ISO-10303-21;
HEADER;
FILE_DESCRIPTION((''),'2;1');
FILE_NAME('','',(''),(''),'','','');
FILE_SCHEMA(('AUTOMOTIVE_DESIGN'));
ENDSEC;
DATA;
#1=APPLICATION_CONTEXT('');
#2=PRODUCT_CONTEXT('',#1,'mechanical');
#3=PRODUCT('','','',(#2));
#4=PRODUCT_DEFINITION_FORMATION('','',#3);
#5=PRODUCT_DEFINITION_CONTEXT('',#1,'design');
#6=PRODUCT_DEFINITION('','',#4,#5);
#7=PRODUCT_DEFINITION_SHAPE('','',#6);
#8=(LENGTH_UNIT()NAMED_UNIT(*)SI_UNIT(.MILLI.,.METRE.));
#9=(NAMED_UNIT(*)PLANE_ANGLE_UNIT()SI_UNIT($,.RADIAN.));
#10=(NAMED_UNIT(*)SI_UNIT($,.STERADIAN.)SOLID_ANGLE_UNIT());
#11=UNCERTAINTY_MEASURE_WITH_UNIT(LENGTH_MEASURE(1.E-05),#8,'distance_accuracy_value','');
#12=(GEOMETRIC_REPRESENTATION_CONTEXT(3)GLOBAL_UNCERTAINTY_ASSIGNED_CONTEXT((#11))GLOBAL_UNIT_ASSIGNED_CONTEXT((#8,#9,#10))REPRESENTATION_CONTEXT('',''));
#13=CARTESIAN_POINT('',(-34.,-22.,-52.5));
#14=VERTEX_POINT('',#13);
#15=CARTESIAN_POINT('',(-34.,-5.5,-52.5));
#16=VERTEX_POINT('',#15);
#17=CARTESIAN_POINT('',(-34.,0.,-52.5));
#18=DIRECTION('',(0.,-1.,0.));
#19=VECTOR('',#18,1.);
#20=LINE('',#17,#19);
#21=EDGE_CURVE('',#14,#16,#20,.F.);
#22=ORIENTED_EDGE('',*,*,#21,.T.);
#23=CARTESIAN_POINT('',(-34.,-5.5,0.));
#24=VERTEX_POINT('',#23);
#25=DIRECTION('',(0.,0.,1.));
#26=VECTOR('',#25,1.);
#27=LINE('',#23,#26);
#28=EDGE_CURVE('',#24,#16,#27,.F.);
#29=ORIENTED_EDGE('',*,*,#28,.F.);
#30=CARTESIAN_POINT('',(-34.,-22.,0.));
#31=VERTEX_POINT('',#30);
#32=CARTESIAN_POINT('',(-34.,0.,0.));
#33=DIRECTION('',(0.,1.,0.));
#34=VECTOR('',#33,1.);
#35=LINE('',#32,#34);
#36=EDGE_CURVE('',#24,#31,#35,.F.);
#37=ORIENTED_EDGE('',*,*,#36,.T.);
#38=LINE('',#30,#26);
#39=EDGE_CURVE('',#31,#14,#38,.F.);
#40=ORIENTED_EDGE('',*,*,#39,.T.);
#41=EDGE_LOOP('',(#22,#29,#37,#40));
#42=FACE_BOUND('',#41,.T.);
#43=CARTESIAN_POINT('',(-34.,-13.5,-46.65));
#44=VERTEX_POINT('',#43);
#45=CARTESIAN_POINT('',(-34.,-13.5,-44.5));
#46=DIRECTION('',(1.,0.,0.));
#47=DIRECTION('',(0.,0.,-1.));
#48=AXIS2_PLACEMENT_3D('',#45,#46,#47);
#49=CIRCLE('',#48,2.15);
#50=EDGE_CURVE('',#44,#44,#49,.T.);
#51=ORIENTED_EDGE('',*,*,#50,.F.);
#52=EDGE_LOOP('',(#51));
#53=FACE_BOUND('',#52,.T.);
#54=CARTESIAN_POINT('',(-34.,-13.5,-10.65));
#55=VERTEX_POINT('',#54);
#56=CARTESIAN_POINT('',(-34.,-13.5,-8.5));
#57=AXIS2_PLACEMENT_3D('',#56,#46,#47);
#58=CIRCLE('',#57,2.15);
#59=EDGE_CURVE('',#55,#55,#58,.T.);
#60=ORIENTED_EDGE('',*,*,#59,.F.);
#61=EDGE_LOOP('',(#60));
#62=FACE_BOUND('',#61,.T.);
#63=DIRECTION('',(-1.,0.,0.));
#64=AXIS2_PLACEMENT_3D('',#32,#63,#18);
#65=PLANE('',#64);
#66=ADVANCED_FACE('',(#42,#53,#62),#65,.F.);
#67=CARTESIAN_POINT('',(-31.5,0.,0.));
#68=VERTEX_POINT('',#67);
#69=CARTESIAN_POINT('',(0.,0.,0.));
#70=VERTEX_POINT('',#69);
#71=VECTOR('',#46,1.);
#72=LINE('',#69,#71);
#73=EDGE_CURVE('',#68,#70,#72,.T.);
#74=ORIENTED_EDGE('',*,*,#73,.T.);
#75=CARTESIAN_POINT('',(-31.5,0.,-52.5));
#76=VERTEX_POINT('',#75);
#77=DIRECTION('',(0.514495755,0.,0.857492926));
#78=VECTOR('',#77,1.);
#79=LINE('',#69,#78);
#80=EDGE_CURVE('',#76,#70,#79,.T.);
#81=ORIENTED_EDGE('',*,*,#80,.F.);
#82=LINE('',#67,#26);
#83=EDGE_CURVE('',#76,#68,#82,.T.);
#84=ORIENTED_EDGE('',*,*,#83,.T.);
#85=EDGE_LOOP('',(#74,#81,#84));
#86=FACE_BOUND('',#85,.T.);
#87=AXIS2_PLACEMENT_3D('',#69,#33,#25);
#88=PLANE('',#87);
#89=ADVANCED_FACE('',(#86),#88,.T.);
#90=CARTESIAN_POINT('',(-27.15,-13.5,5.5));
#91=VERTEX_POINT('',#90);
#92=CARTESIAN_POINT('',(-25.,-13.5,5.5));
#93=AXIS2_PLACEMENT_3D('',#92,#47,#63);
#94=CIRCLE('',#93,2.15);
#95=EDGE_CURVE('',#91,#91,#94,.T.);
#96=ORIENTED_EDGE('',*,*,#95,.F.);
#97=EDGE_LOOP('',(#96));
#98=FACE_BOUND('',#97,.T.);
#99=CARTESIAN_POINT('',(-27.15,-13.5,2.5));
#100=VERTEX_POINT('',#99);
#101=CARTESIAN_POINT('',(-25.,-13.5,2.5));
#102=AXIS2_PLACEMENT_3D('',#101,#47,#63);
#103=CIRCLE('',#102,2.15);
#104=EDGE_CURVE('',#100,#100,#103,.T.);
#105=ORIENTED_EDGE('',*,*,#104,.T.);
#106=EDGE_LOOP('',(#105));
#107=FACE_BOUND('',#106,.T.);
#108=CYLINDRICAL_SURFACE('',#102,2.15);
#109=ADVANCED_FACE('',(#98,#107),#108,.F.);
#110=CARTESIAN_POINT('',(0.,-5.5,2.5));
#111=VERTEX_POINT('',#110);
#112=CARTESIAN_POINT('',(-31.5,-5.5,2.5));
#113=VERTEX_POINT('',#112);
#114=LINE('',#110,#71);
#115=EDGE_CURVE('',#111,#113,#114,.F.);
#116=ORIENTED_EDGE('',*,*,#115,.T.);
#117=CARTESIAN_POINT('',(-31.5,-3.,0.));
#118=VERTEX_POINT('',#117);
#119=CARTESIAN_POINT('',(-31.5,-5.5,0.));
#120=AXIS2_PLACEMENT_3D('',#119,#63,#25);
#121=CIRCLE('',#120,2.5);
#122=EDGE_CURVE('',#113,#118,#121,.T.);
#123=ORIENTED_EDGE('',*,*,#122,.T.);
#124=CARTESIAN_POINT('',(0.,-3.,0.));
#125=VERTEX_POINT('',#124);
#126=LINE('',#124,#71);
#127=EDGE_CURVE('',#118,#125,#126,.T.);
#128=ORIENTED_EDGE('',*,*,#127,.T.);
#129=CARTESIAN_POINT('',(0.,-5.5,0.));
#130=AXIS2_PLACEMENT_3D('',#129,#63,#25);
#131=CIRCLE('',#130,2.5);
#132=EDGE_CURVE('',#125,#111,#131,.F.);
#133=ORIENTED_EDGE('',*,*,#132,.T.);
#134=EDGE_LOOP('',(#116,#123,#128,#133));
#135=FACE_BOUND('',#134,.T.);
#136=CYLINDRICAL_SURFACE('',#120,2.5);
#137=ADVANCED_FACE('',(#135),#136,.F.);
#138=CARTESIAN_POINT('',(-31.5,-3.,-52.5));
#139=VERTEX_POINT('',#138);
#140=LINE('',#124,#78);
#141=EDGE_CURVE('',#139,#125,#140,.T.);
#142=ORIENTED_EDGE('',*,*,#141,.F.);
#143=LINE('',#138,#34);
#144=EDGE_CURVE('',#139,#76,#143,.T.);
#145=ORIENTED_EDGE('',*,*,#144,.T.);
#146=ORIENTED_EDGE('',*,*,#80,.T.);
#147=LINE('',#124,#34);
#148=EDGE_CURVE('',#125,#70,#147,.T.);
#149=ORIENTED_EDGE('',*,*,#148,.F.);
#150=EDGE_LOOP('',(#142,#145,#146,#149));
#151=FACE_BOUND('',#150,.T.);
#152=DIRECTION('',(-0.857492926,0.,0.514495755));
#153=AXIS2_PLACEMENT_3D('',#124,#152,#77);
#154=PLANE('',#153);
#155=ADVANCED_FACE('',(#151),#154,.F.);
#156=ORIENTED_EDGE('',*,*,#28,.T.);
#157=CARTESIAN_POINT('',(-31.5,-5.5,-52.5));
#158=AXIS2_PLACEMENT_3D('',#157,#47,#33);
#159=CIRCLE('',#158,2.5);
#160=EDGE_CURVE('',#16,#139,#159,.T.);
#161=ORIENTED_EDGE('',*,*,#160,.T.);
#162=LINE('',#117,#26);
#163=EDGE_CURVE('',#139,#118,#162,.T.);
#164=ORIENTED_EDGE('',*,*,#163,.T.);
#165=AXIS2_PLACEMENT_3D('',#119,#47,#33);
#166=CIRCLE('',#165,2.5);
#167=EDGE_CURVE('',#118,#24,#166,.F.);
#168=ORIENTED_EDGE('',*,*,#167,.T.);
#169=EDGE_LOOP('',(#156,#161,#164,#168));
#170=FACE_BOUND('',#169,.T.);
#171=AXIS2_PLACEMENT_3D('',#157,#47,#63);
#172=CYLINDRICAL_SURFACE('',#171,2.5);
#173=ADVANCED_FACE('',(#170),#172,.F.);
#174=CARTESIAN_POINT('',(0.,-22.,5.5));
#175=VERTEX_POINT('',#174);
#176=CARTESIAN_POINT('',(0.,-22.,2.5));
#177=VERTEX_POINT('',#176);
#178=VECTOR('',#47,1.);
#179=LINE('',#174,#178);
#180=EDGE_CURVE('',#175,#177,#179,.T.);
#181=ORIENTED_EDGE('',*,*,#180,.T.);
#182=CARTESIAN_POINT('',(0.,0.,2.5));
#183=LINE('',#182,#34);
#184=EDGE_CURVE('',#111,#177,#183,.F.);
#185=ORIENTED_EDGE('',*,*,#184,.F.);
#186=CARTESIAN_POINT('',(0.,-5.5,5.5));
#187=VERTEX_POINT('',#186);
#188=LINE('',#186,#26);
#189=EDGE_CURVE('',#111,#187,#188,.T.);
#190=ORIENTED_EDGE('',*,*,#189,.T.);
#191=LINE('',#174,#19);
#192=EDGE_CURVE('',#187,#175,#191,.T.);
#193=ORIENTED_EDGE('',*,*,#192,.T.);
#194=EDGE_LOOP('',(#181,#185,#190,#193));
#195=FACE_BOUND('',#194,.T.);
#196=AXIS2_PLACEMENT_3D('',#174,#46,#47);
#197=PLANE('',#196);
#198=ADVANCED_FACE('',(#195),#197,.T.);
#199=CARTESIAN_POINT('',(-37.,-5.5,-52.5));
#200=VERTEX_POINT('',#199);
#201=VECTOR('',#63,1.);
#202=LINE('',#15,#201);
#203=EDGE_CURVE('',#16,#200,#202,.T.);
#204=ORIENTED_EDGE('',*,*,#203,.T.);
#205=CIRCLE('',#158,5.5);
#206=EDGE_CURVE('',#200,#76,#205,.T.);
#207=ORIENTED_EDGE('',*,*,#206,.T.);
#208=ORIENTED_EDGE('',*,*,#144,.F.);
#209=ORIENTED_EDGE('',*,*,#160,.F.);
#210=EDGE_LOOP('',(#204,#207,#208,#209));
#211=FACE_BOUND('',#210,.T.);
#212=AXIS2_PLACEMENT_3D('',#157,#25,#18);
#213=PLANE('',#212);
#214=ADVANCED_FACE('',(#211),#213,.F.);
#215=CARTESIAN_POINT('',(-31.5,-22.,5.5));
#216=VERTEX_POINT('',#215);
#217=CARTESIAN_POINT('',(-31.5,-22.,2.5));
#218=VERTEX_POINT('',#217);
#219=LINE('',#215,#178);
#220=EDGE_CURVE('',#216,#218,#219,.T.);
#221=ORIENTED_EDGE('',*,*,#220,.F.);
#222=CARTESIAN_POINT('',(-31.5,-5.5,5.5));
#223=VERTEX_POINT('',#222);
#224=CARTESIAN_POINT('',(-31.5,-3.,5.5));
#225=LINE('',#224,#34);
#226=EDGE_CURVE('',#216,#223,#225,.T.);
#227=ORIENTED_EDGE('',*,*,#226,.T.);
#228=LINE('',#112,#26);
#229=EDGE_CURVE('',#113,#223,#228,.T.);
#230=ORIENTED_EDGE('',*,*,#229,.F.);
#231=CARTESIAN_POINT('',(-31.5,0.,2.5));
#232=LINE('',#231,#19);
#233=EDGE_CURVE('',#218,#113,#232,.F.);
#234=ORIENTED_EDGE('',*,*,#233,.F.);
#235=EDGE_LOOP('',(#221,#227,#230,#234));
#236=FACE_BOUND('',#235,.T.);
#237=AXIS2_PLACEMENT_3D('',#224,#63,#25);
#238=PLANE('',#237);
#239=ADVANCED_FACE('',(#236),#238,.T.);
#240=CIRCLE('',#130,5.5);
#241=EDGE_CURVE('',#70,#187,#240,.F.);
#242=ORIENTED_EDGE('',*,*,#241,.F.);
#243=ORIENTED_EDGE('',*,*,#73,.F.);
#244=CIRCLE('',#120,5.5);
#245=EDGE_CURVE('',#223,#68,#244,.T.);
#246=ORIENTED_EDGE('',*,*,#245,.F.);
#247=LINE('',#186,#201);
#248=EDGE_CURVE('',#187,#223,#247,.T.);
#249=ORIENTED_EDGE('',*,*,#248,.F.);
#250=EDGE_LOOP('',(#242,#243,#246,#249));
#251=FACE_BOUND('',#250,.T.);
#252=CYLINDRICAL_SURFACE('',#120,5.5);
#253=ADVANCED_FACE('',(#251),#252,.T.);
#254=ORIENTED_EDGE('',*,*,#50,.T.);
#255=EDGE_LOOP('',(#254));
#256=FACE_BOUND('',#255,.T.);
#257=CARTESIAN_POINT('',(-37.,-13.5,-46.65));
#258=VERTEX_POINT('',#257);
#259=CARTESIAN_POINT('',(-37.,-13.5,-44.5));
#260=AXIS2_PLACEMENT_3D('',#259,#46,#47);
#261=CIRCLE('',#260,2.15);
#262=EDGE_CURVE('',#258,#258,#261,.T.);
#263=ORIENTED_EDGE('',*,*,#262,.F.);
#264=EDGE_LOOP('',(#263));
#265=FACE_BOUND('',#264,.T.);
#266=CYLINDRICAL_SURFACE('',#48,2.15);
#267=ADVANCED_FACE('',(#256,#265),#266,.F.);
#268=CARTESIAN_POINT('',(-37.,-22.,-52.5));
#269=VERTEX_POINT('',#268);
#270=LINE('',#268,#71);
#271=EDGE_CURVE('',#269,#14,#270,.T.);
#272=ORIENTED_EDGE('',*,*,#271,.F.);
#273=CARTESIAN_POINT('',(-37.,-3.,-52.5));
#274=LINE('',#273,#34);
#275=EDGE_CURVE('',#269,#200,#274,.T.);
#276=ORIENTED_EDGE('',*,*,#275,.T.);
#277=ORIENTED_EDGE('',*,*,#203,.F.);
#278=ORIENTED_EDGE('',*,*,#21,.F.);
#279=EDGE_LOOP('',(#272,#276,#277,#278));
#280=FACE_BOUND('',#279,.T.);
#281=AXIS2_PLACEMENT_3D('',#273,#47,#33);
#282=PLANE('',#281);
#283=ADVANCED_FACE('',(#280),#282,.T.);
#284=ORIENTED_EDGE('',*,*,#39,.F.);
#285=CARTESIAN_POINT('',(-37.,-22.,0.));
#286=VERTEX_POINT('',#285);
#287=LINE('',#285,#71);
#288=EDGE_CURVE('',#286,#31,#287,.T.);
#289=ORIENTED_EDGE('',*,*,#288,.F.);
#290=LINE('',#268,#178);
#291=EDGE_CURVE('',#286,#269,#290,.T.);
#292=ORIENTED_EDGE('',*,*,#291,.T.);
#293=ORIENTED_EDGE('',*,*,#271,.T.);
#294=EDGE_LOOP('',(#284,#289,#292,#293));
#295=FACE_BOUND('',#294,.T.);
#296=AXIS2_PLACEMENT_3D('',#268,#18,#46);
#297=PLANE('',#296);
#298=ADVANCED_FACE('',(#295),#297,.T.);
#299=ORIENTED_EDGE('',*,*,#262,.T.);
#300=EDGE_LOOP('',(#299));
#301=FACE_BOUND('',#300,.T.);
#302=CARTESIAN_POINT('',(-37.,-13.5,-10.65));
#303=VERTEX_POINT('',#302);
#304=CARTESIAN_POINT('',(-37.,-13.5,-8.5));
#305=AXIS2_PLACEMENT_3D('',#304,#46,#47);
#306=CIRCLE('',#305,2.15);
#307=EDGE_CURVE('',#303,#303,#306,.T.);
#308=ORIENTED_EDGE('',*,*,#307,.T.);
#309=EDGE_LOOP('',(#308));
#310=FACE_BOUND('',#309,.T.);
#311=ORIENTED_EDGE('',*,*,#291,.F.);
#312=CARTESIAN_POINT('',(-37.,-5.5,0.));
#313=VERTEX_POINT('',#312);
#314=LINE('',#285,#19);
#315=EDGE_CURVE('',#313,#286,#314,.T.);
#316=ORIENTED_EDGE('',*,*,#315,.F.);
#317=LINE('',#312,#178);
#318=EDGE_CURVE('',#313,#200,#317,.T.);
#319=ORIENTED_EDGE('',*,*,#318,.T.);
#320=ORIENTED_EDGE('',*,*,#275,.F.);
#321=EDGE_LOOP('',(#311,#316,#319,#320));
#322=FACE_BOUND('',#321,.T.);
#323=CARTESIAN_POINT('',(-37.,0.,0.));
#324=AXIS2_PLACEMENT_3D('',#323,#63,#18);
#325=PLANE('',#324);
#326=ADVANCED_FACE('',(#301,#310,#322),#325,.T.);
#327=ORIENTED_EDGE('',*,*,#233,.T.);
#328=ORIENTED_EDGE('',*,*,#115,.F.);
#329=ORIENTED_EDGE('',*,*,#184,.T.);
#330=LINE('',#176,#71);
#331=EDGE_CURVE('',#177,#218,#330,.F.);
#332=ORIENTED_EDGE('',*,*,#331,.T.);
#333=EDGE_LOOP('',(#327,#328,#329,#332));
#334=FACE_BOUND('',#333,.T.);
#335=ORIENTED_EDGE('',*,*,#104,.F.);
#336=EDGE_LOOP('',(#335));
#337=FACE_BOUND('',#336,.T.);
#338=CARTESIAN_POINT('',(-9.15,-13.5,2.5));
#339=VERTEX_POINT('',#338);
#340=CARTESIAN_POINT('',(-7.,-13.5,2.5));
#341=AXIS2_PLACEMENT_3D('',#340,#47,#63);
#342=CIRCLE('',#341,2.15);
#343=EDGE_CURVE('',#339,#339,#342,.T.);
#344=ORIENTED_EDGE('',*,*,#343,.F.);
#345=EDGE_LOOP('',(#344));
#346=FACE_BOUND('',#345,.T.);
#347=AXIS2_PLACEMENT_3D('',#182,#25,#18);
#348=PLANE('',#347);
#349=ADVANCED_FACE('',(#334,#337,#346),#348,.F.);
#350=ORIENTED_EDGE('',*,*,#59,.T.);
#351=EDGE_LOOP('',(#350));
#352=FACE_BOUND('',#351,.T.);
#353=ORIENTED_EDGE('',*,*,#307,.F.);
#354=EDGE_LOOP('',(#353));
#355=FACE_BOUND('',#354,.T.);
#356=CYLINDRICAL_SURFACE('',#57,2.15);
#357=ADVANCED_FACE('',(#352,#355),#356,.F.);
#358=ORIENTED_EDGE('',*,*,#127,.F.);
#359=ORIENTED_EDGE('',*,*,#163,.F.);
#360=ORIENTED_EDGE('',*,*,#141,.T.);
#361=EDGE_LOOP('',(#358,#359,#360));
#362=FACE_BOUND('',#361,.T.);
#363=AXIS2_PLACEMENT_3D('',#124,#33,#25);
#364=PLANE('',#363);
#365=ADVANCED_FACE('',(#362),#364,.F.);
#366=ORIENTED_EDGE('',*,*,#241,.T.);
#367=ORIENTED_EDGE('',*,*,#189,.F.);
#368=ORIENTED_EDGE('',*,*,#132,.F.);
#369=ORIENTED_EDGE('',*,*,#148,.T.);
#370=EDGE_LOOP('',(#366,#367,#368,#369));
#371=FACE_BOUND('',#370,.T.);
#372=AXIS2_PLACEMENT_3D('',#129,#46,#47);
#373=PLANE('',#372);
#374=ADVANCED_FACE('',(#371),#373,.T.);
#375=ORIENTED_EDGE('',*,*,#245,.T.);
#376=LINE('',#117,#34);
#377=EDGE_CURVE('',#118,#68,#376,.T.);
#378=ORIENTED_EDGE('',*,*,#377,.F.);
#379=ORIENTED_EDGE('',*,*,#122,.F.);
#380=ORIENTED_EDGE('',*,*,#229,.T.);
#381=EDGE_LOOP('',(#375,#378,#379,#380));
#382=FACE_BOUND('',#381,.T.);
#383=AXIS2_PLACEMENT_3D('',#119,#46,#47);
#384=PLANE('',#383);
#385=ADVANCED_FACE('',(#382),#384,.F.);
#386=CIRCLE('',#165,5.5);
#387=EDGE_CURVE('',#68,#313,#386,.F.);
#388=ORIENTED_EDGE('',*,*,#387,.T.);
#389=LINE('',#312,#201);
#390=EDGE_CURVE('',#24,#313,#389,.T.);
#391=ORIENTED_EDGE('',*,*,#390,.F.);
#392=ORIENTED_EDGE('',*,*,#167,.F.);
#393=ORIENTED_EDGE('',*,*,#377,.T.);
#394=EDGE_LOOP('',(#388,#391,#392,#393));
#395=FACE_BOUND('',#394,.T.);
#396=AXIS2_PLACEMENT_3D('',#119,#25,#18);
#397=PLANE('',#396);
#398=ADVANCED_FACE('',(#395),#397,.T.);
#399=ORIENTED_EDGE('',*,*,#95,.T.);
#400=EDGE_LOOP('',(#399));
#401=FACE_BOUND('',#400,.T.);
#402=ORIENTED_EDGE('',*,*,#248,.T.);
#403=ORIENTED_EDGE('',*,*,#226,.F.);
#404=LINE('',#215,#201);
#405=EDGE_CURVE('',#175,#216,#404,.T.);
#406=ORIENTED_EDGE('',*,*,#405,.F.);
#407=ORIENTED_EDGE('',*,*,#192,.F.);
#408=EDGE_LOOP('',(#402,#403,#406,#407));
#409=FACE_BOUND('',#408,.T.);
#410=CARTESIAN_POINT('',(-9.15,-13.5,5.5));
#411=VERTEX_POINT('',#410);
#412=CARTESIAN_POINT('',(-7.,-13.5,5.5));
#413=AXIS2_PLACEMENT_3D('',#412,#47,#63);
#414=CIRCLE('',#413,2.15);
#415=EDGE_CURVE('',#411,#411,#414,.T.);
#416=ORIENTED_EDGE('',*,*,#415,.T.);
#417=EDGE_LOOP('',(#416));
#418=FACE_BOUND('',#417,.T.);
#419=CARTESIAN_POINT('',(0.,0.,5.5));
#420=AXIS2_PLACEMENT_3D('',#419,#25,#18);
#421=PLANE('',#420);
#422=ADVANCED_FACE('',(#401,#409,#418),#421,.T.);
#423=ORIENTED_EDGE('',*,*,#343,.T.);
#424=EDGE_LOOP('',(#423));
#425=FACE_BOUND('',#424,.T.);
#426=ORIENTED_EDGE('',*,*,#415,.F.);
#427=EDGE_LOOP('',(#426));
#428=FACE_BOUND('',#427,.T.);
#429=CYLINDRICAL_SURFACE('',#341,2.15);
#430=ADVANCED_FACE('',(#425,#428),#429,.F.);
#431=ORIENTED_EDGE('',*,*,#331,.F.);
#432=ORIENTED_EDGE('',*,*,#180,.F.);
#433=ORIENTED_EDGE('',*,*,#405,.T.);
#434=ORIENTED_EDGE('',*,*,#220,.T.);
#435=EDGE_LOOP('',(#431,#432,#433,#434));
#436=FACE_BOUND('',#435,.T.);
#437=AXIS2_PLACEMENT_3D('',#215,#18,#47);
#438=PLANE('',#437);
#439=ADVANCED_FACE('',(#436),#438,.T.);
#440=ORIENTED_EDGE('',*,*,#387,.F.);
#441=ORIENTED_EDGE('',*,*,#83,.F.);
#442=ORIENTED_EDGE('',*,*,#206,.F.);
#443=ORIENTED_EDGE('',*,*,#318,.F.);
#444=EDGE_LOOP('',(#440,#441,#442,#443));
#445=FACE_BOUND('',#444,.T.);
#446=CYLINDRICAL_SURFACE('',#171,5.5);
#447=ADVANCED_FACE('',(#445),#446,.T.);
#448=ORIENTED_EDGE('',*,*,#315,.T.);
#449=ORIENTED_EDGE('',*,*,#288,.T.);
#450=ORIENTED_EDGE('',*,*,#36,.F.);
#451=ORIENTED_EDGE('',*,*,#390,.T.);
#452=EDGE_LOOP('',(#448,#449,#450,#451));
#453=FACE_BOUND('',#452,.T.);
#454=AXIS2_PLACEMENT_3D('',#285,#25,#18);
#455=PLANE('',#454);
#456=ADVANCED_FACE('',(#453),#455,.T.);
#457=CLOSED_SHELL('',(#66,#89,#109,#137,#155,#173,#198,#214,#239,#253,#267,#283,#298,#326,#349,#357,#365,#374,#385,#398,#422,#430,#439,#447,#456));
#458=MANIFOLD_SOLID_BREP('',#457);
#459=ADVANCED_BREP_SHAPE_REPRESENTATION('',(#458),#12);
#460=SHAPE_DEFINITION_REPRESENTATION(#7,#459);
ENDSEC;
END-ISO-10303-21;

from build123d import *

# Parameters (mm, degrees)
SKETCH1_W            = 31.5
SKETCH1_H            = 52.5
BASE_FLANGE1_DEPTH   = 3
EDGE_FLANGE1_DEPTH   = 31.5
EDGE_FLANGE2_DEPTH   = 52.5
CUT_EXTRUDE1_DEPTH   = 10
M4_CLEARANCE_HOLE1_D = 4.3
M4_CLEARANCE_HOLE2_D = 4.3


# Sheet-metal steps are written as plain solids
with BuildPart() as part:
    # Sketch1 → Base-Flange1 (new body)
    with BuildSketch(Plane(origin=(0, 0, 0), x_dir=(1, 0, 0), z_dir=(0, 1, 0))):
        with Locations((-15.75, 26.25)):
            Rectangle(SKETCH1_W, SKETCH1_H)
    extrude(amount=-BASE_FLANGE1_DEPTH)

    # Edge-Flange1 section (across the edge) → Edge-Flange1 (add)
    with BuildSketch(Plane(origin=(0, -3, 2.5), x_dir=(0, 0, -1), z_dir=(-1, 0, 0))):
        with BuildLine():
            Line((-3, 2.5), (-3, 19))
            Line((-3, 19), (0, 19))
            Line((0, 19), (0, 2.5))
            ThreePointArc((0, 2.5), (0.732233047, 0.732233047), (2.5, 0))
            Line((2.5, 0), (2.5, -3))
            ThreePointArc((2.5, -3), (-1.389087297, -1.389087297), (-3, 2.5))
        make_face()
    extrude(amount=EDGE_FLANGE1_DEPTH)

    # Edge-Flange2 section (across the edge) → Edge-Flange2 (add)
    with BuildSketch(Plane(origin=(-34, -3, 0), x_dir=(1, 0, 0), z_dir=(0, 0, -1))):
        with BuildLine():
            Line((-3, 2.5), (-3, 19))
            Line((-3, 19), (0, 19))
            Line((0, 19), (0, 2.5))
            ThreePointArc((0, 2.5), (0.732233047, 0.732233047), (2.5, 0))
            Line((2.5, 0), (2.5, -3))
            ThreePointArc((2.5, -3), (-1.389087297, -1.389087297), (-3, 2.5))
        make_face()
    extrude(amount=EDGE_FLANGE2_DEPTH)

    # Sketch12 → Cut-Extrude1 (cut)
    with BuildSketch(Plane(origin=(0, 0, 0), x_dir=(1, 0, 0), z_dir=(0, 1, 0))):
        Polygon((-31.5, 52.5), (0, 0), (0, 52.5), align=None)
    extrude(amount=-CUT_EXTRUDE1_DEPTH, mode=Mode.SUBTRACT)

    # M4 Clearance Hole1 (through all)
    with Locations(Plane(origin=(0, 0, 2.5), x_dir=(-1, 0, 0), z_dir=(0, 0, -1))):
        with Locations((7, -13.5), (25, -13.5)):
            Hole(M4_CLEARANCE_HOLE1_D / 2)

    # M4 Clearance Hole2 (through all)
    with Locations(Plane(origin=(-34, 0, 0), x_dir=(0, 0, -1), z_dir=(1, 0, 0))):
        with Locations((44.5, -13.5), (8.5, -13.5)):
            Hole(M4_CLEARANCE_HOLE2_D / 2)


solid = part.part
